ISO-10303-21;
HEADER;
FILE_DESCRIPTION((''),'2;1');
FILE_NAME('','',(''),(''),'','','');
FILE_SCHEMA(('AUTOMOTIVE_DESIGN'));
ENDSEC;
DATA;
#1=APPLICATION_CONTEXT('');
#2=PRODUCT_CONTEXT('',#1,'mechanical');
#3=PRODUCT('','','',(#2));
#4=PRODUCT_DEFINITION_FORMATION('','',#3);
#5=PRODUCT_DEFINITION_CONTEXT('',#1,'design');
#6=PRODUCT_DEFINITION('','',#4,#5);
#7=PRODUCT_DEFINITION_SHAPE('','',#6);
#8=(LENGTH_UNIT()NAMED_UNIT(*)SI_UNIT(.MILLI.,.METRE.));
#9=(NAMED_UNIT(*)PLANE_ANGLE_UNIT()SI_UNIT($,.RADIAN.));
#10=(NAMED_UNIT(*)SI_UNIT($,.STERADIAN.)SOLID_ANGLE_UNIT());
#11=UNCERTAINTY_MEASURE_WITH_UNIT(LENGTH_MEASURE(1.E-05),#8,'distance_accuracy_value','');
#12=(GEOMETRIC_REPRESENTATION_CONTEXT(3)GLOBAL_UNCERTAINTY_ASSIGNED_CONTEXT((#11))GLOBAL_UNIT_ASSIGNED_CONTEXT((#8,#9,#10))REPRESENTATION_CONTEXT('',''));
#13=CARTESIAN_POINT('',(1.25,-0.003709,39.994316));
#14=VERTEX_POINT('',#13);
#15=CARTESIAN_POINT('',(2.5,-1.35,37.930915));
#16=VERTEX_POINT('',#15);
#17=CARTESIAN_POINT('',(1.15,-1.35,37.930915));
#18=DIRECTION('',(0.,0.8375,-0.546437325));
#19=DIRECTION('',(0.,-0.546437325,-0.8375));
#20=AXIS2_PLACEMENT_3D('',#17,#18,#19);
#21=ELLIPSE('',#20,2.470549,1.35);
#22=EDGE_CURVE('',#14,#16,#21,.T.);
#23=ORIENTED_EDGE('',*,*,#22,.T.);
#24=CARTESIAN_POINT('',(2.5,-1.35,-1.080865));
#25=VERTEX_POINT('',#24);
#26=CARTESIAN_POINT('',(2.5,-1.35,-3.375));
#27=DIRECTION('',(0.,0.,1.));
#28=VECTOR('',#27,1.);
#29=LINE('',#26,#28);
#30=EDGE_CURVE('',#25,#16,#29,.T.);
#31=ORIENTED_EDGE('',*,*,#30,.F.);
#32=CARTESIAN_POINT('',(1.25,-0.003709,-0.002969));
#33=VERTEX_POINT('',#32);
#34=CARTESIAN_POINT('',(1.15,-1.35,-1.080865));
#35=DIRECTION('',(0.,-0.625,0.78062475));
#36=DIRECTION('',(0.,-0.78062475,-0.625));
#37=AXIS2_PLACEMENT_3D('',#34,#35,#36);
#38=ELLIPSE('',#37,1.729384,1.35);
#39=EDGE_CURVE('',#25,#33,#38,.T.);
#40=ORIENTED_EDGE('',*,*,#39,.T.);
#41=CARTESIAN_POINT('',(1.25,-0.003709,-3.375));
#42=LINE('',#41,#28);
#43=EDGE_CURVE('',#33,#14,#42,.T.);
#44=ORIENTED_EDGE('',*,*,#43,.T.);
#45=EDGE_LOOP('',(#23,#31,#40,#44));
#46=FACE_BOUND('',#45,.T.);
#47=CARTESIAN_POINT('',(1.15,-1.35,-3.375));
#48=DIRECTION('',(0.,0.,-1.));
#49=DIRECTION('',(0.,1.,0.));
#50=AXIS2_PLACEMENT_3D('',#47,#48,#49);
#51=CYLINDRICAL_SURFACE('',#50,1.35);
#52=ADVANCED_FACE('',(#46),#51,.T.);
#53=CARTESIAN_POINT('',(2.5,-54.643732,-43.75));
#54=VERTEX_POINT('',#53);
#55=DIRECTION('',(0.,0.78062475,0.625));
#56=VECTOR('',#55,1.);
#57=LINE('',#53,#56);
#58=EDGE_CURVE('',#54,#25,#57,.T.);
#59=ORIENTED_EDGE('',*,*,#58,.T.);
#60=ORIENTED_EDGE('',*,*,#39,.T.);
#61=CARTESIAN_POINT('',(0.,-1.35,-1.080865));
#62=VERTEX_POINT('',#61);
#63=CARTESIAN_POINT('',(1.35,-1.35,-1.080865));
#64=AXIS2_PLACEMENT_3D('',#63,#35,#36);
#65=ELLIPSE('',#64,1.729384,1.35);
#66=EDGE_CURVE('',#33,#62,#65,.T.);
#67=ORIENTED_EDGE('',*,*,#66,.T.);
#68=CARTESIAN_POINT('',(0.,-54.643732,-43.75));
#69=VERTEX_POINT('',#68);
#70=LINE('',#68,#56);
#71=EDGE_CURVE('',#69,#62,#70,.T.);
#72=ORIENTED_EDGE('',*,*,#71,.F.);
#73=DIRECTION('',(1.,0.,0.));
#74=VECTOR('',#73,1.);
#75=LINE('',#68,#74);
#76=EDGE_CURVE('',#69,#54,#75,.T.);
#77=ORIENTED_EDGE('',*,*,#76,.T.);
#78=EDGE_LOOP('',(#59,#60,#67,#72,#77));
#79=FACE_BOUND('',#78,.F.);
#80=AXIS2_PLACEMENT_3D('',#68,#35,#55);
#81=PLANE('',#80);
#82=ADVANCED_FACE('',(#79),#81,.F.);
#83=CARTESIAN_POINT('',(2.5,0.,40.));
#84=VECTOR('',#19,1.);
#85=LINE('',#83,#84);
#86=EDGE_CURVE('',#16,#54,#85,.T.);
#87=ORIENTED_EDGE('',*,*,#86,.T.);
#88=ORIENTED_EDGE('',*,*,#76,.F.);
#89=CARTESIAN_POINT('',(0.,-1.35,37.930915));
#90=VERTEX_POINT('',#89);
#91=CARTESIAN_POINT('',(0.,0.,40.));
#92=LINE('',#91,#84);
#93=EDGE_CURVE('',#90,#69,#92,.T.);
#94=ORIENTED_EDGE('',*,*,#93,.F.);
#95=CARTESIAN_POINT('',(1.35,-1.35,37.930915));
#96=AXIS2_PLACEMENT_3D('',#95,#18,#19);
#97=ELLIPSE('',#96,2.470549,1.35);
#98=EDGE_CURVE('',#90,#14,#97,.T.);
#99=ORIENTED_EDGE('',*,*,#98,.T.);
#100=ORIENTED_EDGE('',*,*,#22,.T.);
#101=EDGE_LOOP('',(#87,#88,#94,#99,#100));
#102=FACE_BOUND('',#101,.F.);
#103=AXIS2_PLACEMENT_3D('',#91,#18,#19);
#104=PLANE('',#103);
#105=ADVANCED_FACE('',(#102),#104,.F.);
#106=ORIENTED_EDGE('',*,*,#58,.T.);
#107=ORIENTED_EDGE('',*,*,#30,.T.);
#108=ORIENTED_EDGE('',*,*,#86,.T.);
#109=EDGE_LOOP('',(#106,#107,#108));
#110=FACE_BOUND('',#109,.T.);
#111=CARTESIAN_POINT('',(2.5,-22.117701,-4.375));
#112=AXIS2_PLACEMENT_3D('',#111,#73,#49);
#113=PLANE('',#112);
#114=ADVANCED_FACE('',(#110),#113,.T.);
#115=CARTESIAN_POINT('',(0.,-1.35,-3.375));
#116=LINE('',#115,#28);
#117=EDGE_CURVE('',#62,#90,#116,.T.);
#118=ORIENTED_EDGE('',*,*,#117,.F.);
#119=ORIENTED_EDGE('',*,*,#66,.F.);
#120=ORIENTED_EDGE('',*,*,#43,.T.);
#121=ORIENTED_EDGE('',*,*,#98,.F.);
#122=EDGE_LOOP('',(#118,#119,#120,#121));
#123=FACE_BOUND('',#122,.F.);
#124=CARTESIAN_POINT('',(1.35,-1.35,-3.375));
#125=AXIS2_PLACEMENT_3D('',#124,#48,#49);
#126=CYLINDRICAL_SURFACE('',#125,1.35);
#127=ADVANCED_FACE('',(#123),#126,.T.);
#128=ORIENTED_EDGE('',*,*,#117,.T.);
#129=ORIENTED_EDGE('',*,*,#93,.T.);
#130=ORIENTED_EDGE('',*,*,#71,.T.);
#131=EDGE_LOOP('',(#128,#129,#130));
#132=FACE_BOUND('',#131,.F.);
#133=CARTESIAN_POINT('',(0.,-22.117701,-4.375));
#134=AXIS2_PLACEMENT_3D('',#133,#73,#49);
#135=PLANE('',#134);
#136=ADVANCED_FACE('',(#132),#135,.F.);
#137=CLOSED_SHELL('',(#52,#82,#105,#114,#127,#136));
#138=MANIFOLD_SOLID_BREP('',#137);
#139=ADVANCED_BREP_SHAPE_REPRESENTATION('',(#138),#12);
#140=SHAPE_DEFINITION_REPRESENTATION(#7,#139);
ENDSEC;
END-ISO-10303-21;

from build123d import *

# Parameters (mm, degrees)
F1_DEPTH    = 2.5
F2_T1_DEPTH = 46.75


# Not quite as in the source:
# - a fillet or chamfer that OpenCascade refuses, or shapes differently, is made with other operations: its cross-section is extruded or revolved along the edge and cut away or added


with BuildPart() as f1:
    # F0 (on Right) → F1 (new body)
    with BuildSketch(Plane.YZ):
        Polygon((-54.643732486, -43.75), (0, 0), (0, 40), align=None)
    extrude(amount=F1_DEPTH)

    # F2: fillet of radius 1.35 on 2 edges, made by hand

    # F2_s2 → F2_t1 (cut)
    with BuildSketch(Plane.XY.offset(-3.375)):
        with BuildLine():
            ThreePointArc((1.15, 0), (2.1045941546, -0.3954058454), (2.5, -1.35))
            Line((2.5, -1.35), (2.5, 0))
            Line((2.5, 0), (1.15, 0))
        make_face()
        with BuildLine():
            ThreePointArc((1.35, 0), (0.3954058454, -0.3954058454), (0, -1.35))
            Line((0, -1.35), (0, 0))
            Line((0, 0), (1.35, 0))
        make_face()
    extrude(amount=F2_T1_DEPTH, mode=Mode.SUBTRACT)


solid = f1.part
